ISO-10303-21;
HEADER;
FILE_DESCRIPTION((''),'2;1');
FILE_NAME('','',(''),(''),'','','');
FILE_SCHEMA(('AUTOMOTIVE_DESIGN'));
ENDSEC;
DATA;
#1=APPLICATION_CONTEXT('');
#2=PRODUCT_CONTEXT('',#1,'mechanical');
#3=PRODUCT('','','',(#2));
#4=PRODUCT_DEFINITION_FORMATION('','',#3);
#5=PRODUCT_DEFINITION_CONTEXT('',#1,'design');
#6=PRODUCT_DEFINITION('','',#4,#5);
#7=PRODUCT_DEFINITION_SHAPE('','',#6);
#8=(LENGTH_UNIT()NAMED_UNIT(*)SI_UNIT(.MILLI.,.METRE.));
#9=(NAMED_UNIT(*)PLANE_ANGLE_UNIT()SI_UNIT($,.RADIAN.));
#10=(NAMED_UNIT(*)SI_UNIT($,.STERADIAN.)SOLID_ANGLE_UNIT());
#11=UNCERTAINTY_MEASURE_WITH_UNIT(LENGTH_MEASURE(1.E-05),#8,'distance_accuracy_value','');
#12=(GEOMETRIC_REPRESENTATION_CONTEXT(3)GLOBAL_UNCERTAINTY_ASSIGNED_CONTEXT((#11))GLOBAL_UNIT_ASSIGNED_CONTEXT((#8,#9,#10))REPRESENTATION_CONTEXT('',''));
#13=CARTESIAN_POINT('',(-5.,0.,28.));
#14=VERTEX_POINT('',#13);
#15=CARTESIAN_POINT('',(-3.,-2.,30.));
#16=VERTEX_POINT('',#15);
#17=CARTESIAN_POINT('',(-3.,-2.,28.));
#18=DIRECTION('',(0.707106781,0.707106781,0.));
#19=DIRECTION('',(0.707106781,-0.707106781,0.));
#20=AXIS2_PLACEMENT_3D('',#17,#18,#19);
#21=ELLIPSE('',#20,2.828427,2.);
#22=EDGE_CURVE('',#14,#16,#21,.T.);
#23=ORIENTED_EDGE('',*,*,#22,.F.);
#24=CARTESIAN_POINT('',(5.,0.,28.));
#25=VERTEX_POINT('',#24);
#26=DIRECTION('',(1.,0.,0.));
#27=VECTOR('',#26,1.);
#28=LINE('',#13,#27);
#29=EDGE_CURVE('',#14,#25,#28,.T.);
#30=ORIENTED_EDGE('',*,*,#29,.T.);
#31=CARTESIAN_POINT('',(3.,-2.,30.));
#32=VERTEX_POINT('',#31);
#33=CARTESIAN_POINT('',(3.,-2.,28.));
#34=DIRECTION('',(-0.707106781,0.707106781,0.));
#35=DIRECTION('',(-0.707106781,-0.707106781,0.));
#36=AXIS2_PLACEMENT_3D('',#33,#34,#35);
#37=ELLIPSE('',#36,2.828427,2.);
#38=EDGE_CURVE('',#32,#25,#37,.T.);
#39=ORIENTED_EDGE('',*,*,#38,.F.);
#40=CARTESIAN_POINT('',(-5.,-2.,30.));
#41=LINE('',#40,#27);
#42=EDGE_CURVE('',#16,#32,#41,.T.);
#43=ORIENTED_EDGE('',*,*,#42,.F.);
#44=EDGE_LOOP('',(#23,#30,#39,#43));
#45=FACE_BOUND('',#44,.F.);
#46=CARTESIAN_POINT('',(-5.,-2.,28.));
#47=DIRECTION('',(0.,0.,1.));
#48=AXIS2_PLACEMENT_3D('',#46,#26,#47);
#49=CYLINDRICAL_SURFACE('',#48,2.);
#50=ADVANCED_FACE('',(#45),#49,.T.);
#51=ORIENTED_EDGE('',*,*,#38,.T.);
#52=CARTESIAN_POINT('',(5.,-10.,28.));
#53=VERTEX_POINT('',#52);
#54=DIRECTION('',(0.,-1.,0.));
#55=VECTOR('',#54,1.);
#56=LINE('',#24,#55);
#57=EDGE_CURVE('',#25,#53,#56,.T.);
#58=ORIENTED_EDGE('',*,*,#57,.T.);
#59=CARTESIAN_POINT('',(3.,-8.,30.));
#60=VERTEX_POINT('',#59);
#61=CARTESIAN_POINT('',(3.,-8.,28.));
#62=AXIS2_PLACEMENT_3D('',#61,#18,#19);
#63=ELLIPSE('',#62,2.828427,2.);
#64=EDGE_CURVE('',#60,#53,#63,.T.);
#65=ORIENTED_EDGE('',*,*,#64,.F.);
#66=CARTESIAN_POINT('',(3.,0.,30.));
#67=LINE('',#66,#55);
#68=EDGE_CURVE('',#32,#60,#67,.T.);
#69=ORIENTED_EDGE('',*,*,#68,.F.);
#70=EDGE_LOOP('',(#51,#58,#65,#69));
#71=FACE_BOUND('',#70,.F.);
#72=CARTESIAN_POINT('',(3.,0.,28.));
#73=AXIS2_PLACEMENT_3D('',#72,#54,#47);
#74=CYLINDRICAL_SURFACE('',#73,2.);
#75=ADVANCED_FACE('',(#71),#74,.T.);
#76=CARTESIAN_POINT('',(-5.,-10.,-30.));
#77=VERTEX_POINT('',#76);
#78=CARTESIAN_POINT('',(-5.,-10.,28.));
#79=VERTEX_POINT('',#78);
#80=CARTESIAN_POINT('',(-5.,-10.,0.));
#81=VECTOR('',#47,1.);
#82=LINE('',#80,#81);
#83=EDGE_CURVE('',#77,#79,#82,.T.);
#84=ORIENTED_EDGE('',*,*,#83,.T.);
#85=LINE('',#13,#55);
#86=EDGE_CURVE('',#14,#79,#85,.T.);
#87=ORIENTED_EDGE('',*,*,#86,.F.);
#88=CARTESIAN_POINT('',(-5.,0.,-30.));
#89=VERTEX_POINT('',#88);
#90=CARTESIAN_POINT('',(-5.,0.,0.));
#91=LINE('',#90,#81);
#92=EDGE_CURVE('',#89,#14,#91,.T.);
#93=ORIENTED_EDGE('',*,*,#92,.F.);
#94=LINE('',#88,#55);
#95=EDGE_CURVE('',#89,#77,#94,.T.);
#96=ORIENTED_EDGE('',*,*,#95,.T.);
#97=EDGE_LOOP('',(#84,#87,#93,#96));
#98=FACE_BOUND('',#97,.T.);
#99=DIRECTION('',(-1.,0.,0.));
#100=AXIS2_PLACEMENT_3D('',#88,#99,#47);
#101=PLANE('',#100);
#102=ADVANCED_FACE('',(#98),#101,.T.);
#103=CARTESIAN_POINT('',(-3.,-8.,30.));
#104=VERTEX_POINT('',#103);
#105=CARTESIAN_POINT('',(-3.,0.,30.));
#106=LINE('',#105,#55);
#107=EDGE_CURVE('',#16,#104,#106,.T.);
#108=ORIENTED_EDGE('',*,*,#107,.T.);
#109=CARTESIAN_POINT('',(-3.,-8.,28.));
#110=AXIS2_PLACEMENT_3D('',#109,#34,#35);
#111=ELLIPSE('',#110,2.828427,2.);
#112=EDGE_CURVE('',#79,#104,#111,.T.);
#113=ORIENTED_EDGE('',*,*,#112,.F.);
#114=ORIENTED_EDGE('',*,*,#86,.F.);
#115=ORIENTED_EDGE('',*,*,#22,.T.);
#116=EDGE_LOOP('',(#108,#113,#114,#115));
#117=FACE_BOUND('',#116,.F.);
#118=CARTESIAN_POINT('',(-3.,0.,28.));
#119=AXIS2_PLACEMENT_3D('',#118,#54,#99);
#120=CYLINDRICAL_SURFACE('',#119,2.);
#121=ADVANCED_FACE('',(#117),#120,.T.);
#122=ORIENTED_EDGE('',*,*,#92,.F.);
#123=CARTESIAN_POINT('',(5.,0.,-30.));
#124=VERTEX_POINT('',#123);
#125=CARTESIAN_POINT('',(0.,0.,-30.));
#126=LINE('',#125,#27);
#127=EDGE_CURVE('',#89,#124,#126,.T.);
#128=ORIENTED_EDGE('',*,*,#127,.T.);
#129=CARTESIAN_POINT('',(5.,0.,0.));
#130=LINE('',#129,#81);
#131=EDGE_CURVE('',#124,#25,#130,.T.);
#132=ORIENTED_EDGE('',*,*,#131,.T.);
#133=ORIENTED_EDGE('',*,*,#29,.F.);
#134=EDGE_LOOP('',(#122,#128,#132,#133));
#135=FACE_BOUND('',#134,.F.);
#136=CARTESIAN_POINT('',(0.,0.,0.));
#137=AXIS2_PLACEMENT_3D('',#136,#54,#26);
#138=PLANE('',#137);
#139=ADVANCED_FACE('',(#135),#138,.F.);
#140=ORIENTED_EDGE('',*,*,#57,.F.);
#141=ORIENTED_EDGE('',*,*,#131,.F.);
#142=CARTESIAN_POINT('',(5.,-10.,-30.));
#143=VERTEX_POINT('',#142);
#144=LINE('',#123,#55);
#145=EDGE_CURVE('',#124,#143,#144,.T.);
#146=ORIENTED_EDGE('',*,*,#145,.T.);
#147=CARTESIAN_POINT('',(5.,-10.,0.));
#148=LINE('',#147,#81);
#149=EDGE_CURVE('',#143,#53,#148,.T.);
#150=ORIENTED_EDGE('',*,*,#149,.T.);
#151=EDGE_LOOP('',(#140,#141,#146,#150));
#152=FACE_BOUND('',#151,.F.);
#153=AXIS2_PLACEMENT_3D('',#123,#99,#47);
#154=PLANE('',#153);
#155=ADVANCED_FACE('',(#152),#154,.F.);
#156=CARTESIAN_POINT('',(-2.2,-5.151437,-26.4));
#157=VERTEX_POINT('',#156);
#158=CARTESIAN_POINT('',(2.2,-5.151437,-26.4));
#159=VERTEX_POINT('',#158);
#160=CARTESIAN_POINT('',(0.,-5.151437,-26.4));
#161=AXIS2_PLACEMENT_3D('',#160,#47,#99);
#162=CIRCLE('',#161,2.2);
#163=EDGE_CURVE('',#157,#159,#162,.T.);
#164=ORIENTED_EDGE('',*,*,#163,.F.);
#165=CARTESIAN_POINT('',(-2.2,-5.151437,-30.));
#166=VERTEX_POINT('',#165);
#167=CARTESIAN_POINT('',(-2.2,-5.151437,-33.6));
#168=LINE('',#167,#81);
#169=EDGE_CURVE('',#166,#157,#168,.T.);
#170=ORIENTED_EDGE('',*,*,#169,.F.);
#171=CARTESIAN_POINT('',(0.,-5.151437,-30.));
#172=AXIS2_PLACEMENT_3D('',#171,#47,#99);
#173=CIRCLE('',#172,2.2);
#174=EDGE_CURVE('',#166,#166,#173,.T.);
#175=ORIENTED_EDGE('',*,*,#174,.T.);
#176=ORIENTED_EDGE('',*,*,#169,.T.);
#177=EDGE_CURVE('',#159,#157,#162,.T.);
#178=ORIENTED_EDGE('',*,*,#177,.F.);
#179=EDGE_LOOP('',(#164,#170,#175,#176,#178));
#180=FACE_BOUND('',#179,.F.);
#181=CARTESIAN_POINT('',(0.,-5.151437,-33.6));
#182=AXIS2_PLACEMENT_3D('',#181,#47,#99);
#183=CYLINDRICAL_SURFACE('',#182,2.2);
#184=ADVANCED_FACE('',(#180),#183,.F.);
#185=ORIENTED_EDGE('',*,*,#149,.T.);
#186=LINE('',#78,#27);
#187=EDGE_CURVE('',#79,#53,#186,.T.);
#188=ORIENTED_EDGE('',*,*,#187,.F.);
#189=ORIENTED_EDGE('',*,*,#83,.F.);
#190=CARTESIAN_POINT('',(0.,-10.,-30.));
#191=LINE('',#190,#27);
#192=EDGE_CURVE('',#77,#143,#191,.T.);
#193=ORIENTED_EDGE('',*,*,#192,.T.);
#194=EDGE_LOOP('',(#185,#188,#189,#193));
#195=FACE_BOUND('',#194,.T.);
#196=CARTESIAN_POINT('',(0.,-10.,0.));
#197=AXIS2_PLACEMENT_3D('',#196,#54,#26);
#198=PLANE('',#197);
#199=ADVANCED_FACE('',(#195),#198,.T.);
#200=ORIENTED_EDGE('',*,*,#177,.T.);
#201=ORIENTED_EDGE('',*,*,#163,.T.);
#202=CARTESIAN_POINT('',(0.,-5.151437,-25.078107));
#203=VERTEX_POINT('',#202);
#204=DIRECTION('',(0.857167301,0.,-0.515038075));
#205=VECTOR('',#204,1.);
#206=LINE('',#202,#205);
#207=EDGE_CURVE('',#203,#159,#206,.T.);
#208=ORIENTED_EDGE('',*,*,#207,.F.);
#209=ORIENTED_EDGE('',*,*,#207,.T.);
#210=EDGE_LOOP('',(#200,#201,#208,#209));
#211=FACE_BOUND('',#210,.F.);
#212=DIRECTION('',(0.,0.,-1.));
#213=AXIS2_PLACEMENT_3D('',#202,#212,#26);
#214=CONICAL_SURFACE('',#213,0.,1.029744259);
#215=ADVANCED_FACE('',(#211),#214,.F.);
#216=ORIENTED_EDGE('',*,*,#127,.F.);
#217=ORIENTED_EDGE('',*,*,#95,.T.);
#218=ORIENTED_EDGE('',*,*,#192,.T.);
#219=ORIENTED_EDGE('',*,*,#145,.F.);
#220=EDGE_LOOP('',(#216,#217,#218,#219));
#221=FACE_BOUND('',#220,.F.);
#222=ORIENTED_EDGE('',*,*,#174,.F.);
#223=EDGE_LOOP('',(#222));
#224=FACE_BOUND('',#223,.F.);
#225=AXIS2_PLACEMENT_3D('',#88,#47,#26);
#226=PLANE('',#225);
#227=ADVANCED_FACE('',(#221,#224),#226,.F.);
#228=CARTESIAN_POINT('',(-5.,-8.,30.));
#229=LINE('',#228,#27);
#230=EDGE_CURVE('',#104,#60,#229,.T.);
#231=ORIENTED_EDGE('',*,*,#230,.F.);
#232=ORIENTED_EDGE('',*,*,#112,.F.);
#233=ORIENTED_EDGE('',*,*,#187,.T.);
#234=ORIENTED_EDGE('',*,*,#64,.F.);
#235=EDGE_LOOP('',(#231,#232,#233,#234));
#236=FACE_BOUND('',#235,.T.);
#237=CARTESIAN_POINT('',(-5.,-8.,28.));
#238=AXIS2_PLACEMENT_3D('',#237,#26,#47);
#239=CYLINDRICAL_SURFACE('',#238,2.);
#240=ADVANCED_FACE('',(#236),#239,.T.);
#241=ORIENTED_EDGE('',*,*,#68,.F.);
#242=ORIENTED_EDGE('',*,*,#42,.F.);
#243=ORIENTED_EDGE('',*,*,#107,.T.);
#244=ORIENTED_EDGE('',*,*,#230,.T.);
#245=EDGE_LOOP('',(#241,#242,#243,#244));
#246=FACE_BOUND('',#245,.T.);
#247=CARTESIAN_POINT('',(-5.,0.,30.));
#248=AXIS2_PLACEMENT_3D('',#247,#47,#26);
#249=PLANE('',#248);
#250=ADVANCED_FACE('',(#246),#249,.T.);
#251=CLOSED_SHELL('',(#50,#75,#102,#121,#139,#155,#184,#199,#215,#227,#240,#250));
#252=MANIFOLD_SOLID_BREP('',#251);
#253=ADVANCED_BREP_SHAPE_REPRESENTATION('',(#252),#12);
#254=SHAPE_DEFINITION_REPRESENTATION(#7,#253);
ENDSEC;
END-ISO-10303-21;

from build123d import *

# Parameters (mm, degrees)
F0_W     = 10
F0_H     = 60
F1_DEPTH = 10
F3_D     = 4.4
F3_DEPTH = 3.6
F3_TIP   = 1.3218933619
F4_R     = 2


with BuildPart() as f1:
    # F0 (on Front) → F1 (new body)
    with BuildSketch(Plane.XZ):
        Rectangle(F0_W, F0_H)
    extrude(amount=F1_DEPTH)

    # F3
    with Locations(Plane(origin=(0, 0, -30), x_dir=(1, 0, 0), z_dir=(0, 0, -1))):
        with Locations((0, 5.1514371298)):
            Hole(F3_D / 2, depth=F3_DEPTH)
            with Locations((0, 0, -(F3_DEPTH + F3_TIP / 2))):  # 118° drill point
                Cone(0, F3_D / 2, F3_TIP, mode=Mode.SUBTRACT)

    # F4
    f4_edges = [f1.edges().sort_by_distance(p)[0] for p in [
        (5, -5, 30),
        (-5, -5, 30),
        (0, 0, 30),
        (0, -10, 30),
    ]]
    fillet(f4_edges, radius=F4_R)


solid = f1.part
